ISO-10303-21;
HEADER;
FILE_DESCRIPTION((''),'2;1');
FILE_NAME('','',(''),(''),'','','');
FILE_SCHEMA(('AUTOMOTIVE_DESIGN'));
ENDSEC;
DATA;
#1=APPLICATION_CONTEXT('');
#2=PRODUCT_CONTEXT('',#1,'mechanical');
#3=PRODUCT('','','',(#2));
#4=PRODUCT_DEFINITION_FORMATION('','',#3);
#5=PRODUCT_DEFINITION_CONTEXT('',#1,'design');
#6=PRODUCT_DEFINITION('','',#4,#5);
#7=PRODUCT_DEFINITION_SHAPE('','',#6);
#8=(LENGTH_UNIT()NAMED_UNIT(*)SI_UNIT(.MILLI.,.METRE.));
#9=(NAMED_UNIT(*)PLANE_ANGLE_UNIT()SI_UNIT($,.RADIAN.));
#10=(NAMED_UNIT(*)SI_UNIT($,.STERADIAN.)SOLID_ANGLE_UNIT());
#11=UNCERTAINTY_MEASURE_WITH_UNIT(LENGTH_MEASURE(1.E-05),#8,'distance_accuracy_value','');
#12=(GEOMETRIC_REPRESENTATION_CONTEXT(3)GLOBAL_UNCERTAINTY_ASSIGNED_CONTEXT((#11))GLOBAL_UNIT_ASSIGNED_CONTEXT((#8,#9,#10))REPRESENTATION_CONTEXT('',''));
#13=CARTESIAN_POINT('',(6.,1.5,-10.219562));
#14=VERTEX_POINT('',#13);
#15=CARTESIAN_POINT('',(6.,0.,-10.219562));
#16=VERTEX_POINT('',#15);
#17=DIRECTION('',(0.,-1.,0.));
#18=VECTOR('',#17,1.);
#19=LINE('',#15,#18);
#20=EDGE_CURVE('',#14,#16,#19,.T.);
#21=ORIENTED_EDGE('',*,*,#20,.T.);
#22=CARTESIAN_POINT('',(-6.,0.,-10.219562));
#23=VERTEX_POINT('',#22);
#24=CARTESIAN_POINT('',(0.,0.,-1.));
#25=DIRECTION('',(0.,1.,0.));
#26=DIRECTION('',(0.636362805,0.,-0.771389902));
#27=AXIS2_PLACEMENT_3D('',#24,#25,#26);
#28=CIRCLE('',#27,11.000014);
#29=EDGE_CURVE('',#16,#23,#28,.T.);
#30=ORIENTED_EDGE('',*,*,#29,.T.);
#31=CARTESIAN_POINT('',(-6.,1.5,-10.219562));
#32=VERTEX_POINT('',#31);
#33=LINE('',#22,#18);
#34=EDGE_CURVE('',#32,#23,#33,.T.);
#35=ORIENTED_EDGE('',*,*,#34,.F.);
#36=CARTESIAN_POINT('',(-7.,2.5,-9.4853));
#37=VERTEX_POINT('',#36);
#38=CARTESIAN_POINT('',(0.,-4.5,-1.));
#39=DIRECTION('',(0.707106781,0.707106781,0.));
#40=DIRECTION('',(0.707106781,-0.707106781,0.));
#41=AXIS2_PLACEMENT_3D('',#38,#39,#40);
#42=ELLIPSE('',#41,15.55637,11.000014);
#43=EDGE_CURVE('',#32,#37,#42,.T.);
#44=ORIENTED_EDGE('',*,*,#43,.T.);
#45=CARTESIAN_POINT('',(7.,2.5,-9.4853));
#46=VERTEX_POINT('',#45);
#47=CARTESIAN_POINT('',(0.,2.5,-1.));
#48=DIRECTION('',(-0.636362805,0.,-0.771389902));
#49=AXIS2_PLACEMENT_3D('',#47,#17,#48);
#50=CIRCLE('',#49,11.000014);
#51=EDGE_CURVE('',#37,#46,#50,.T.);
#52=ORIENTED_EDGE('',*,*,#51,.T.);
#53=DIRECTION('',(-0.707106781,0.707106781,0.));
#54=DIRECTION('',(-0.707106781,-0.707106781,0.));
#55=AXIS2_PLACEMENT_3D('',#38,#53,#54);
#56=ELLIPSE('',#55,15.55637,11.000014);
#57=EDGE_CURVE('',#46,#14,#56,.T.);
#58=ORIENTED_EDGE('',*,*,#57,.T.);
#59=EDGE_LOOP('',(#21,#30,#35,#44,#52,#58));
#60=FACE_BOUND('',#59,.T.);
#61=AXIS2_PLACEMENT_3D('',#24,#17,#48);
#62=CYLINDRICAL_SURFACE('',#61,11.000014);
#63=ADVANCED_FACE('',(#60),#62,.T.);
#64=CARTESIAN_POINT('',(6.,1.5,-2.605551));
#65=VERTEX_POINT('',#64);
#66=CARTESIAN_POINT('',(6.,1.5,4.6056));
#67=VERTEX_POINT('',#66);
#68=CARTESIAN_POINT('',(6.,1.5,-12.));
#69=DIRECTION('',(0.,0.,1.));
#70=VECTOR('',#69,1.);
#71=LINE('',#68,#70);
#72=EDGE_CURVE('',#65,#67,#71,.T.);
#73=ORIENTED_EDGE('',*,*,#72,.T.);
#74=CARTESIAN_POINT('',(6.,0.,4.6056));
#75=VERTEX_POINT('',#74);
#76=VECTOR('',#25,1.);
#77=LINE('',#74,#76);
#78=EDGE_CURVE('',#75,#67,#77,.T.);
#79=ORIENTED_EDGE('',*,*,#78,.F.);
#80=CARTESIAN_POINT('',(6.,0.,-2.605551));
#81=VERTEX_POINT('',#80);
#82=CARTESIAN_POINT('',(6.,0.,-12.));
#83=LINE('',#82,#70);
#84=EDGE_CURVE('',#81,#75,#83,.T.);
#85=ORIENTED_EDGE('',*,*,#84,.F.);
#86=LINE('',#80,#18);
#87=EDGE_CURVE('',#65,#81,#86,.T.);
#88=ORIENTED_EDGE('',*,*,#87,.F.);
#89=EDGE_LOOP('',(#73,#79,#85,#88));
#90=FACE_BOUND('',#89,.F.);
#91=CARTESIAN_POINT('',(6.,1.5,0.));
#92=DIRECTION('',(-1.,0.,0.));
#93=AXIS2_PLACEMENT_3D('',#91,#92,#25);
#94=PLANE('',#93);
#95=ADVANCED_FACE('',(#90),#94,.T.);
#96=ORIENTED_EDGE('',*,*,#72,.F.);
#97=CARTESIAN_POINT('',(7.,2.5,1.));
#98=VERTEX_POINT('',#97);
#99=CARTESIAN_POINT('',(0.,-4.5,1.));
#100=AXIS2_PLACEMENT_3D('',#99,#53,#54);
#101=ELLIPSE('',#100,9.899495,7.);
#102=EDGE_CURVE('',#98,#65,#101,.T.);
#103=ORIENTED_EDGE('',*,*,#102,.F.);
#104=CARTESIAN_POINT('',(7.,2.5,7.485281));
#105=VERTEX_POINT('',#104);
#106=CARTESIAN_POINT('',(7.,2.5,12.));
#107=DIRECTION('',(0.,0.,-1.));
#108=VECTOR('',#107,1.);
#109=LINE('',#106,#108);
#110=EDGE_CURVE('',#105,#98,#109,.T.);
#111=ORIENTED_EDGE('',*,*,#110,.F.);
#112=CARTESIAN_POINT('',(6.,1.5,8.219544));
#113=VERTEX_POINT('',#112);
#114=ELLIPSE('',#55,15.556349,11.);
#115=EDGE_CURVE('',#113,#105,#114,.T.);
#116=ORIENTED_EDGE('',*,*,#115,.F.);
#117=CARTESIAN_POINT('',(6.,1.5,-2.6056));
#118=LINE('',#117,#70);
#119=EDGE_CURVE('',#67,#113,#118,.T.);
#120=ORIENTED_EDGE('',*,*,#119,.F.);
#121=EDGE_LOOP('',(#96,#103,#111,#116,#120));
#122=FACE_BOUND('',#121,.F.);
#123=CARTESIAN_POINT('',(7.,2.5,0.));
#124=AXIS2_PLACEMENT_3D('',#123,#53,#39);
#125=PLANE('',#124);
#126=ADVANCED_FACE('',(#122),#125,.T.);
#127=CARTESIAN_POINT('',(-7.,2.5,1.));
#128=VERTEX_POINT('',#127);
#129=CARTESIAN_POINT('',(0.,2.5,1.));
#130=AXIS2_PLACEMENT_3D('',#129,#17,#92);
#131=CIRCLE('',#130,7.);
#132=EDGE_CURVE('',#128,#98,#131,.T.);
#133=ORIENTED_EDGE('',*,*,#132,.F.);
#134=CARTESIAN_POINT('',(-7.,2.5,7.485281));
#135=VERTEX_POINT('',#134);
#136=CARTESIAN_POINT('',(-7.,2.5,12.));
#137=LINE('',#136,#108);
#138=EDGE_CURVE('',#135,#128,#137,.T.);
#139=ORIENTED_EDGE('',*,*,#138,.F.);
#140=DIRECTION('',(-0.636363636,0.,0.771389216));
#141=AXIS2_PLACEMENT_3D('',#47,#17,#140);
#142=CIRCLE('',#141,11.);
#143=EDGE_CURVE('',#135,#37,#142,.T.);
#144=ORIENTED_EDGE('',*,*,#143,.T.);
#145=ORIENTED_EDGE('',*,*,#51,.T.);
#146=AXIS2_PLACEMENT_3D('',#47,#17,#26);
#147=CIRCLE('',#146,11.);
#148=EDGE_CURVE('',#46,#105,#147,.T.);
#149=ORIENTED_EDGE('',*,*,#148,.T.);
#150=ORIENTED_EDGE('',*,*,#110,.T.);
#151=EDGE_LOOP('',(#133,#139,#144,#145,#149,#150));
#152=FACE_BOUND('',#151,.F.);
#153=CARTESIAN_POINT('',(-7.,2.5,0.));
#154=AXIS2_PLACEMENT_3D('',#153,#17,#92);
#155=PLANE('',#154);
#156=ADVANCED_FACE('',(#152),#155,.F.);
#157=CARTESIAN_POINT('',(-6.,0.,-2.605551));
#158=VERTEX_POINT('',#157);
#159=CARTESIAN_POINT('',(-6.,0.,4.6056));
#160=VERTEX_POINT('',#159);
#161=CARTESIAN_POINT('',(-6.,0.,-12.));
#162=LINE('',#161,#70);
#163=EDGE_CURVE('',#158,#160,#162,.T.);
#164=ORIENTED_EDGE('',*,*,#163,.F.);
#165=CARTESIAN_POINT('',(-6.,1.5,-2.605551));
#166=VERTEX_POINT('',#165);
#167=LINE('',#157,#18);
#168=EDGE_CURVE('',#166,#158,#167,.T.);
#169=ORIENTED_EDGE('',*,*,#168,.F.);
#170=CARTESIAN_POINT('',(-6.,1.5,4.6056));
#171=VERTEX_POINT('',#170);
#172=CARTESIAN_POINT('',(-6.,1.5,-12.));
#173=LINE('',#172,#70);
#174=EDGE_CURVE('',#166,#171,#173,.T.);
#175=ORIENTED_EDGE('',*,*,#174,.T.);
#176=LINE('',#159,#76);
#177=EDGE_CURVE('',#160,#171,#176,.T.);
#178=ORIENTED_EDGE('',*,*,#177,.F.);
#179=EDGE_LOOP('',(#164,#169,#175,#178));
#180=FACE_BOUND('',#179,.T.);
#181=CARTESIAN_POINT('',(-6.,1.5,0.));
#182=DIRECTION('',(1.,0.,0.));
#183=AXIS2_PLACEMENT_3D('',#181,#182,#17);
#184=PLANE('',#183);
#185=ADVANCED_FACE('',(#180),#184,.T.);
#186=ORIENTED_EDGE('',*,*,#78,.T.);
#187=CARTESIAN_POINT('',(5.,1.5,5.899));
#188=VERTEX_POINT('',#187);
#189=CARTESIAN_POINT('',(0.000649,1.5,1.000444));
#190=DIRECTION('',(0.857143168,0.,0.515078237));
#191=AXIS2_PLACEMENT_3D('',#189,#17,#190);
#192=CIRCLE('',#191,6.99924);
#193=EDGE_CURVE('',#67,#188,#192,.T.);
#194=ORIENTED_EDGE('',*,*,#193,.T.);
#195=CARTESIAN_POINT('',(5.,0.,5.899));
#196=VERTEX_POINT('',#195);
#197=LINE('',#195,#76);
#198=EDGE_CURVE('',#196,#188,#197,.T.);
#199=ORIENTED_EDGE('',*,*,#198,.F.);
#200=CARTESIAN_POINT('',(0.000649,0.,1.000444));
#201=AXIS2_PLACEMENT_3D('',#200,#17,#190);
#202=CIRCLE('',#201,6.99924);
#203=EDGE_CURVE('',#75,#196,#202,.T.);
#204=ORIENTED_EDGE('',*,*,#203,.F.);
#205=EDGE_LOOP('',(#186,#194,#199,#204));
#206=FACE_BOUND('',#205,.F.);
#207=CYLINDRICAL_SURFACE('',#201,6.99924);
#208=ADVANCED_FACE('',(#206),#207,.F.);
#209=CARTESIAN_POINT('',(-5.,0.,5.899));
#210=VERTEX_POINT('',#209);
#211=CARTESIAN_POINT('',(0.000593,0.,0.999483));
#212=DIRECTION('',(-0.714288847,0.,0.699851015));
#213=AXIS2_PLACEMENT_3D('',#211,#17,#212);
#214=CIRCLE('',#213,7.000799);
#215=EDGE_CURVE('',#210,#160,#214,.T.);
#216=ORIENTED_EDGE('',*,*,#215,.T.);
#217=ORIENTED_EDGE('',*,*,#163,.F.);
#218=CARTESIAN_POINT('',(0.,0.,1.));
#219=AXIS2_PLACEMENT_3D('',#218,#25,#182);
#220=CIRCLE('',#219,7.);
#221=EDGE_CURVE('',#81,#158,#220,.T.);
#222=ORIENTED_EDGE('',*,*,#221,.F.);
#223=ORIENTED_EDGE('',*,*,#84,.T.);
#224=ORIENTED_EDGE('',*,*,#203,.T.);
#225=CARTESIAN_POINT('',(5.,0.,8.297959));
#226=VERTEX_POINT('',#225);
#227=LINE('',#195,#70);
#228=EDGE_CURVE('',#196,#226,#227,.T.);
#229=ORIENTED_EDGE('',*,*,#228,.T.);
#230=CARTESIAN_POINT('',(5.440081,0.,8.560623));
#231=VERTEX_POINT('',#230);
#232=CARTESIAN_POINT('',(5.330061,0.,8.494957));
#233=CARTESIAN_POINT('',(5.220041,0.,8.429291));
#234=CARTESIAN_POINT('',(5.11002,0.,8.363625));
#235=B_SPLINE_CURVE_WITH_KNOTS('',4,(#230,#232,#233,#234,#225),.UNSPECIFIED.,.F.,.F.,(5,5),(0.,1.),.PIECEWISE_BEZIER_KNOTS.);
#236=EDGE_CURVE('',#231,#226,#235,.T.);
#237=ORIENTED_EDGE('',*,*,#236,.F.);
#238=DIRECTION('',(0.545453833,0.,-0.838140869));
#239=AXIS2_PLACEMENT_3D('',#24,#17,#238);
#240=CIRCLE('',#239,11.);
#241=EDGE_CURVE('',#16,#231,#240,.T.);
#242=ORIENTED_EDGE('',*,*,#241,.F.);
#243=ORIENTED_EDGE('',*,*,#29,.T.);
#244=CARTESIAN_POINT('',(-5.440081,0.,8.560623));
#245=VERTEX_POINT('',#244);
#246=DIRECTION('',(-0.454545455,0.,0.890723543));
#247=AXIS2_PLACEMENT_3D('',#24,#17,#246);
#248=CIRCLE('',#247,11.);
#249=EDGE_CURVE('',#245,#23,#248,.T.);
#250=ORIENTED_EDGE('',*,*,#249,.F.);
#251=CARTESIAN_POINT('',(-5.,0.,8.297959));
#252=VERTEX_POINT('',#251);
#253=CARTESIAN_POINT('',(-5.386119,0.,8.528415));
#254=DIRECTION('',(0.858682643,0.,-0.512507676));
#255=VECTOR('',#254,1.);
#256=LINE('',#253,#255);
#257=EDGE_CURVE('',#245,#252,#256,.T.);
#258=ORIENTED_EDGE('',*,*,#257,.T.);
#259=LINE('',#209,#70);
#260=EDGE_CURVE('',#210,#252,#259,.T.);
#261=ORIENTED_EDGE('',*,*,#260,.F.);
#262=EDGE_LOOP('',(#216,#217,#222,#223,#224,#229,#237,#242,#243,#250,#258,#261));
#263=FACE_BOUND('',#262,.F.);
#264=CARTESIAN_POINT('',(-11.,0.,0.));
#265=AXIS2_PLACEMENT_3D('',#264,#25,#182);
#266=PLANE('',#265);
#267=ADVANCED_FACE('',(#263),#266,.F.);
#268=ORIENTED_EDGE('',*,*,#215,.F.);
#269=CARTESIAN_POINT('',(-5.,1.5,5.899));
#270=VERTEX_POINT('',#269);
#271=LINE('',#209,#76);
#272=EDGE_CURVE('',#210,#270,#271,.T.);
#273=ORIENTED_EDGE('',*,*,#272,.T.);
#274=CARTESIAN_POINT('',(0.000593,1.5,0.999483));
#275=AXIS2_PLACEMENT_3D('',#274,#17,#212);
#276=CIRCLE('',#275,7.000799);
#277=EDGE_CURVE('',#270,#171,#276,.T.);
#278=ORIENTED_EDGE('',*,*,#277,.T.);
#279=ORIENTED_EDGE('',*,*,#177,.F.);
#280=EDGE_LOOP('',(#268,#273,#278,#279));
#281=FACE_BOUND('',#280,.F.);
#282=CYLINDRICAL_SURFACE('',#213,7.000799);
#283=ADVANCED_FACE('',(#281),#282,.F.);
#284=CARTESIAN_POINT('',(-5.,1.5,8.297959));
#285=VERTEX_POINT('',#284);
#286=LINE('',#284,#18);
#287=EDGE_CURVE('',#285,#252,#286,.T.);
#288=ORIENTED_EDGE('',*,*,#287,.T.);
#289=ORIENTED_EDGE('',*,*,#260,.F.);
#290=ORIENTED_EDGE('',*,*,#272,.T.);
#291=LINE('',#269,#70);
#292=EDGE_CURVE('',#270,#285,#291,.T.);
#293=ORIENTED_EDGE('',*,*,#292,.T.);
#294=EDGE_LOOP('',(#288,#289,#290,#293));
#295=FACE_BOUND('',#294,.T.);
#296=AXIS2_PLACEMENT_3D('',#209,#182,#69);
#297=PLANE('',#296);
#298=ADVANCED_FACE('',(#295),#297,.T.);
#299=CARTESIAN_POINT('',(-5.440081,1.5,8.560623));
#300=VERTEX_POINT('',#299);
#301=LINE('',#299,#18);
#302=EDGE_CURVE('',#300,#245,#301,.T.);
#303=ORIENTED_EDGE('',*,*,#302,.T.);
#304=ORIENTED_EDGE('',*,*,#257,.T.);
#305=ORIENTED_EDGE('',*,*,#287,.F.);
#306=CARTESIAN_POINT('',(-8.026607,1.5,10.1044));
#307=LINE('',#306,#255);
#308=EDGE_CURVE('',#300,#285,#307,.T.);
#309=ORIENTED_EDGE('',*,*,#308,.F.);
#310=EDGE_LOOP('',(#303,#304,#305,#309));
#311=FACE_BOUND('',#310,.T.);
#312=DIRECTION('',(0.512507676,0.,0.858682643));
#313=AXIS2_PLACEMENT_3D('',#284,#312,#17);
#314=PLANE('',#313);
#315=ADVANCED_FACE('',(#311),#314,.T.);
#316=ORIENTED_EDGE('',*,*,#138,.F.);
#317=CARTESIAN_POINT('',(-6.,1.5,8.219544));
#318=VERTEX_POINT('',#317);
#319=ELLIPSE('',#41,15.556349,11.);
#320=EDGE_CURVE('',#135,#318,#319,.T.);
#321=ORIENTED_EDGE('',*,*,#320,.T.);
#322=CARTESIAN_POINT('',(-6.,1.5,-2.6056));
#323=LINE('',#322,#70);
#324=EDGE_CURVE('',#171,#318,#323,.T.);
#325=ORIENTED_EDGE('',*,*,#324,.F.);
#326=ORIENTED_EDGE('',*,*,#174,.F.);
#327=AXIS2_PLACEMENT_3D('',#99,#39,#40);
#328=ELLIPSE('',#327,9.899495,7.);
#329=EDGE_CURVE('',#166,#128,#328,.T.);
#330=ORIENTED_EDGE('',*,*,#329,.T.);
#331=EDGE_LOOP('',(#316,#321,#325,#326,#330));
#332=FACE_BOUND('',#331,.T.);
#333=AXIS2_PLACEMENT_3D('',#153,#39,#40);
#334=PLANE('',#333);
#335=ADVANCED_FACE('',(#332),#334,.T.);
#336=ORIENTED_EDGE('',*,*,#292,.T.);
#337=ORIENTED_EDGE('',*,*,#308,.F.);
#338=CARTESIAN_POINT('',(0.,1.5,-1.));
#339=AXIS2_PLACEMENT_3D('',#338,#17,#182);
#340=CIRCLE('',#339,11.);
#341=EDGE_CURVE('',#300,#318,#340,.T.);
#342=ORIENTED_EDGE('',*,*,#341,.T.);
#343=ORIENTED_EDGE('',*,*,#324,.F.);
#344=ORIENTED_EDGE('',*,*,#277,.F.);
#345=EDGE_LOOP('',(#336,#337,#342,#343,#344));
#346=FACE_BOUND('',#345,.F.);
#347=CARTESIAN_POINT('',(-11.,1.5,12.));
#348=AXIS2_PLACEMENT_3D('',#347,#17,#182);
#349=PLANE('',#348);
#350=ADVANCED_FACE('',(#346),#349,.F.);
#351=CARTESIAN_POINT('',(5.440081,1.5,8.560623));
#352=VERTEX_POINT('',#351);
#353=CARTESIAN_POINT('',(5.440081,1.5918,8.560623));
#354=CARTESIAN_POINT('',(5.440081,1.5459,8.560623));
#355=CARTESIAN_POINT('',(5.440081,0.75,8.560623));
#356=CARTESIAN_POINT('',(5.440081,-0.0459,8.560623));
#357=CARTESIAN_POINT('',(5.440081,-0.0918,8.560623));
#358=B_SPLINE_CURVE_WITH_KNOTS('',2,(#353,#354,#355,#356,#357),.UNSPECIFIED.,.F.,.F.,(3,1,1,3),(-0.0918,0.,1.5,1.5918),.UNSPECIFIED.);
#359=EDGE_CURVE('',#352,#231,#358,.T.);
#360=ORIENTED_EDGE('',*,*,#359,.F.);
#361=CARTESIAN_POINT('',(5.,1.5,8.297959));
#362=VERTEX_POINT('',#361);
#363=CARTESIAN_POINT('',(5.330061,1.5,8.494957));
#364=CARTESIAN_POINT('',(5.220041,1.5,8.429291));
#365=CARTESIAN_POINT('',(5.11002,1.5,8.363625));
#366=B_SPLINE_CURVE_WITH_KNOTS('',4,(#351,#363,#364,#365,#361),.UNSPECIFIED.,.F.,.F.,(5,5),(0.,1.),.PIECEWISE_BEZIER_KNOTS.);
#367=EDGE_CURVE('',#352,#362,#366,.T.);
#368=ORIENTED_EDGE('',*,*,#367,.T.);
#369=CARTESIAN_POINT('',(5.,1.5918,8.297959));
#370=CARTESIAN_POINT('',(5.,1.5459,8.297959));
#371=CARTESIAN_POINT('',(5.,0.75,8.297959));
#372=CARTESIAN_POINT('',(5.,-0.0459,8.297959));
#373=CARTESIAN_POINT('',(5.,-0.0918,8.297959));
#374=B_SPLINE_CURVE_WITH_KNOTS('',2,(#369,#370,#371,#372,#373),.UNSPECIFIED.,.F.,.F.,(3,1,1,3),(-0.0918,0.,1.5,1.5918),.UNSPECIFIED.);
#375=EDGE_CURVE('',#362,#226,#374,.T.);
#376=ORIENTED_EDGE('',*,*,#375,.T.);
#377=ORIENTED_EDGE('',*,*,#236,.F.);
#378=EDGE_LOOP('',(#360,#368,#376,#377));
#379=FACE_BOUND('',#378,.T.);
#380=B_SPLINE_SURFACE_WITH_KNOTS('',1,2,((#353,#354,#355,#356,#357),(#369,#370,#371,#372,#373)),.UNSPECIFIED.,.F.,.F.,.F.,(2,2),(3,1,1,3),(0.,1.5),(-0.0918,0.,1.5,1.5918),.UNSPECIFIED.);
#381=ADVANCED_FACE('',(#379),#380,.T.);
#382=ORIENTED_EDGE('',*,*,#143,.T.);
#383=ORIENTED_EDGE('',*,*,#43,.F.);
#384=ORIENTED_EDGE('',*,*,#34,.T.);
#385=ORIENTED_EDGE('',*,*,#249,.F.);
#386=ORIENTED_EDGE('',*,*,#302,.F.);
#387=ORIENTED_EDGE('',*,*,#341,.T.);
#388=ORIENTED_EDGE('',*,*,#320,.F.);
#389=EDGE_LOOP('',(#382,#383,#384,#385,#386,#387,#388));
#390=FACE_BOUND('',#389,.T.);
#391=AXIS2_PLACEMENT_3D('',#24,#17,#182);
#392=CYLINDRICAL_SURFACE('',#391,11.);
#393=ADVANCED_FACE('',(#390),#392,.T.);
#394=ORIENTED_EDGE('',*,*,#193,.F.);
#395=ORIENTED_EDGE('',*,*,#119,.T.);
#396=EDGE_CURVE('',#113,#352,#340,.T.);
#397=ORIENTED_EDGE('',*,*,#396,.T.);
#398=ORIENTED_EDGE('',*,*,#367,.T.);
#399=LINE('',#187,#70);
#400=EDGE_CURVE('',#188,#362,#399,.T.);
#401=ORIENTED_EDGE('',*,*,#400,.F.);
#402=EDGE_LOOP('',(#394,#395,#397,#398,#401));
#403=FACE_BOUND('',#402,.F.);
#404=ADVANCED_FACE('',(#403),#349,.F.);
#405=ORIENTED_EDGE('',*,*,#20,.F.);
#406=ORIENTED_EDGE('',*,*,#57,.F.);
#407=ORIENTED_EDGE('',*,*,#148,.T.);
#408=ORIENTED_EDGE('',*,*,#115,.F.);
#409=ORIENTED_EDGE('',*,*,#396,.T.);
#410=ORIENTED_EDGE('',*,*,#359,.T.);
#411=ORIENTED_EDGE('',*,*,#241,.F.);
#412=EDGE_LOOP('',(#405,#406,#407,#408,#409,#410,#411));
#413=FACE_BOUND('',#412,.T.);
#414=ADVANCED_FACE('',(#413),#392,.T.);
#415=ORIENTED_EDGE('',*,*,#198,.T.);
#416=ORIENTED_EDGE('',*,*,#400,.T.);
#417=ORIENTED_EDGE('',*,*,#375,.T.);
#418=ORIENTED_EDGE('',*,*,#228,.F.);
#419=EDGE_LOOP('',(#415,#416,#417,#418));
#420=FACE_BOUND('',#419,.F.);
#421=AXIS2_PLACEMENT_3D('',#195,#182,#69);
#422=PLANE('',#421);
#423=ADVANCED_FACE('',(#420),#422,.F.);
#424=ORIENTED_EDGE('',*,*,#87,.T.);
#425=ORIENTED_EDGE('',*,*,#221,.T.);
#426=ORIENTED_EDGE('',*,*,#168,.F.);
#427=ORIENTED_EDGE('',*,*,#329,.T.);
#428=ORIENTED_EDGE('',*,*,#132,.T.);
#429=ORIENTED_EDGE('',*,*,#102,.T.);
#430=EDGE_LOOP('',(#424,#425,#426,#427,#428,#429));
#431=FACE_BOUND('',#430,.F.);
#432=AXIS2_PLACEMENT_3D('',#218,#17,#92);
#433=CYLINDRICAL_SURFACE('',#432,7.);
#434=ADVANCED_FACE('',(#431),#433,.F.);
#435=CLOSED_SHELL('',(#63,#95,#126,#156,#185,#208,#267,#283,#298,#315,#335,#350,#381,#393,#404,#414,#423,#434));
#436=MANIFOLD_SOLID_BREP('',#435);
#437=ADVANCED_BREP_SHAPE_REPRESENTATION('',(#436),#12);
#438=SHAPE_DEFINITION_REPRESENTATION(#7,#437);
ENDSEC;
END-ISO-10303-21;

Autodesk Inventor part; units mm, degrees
ref_plane "YZ Plane" through (0, 0, 0) normal (1, 0, 0) x (0, 1, 0)
ref_plane "XZ Plane" through (0, 0, 0) normal (0, 1, 0) x (-1, 0, 0)
ref_plane "XY Plane" through (0, 0, 0) normal (0, 0, 1) x (1, 0, 0)
sketch "Sketch1" plane through (0, 0, 0) normal (0, 0, 1) x (1, 0, 0)
  line L0 (0, 0) -> (-7, 0) construction
  line L1 (-7, 0) -> (-7, 2.5)
  line L2 (-7, 2.5) -> (-6, 1.5)
  line L3 (-6, 1.5) -> (-6, 0)
  line L4 (-7, 2.5) -> (-11, 2.5)
  line L5 (-11, 2.5) -> (-11, 0)
  line L6 (-11, 0) -> (-7, 0)
  line L7 (-7, 0) -> (-7, 2.5)
  line L8 (-7, 0) -> (-6, 0)
  dimension "d0" = 7
  dimension "d1" = 45
  dimension "d2" = 1
  dimension "d3" = 2.5
  dimension "d5" = 11
extrude "Extrusion1" add sketch "Sketch1" along normal mid plane 24
mirror "Mirror1" about plane through (0, 0, 0) normal (1, 0, 0) of "Extrusion1"
sketch "Sketch2" plane through (-11, 0, 12) normal (0, -1, 0) x (1, 0, 0)
  line L0 (5, -24) -> (5, 0) projected
  line L1 (0, 0) -> (5, 0) projected
  line L2 (0, -24) -> (0, 0) projected
  line L3 (5, -24) -> (0, -24) projected
  line L4 (17, -24) -> (17, 0) projected
  line L5 (17, -24) -> (22, -24) projected
  line L6 (22, -24) -> (22, 0) projected
  line L7 (22, 0) -> (17, 0) projected
  line L8 (11, -12) -> (11, -11)
  line L9 (5, -24) -> (5, 0) projected
  arc A0 (4, -11) -> (18, -11) centre (11, -11) ccw
  line L10 (11, -12) -> (11, -13)
  arc A1 (4, -21.4853) -> (18, -21.4853) centre (11, -13) ccw
  line L11 (17, -24) -> (17, 0) projected
  line L12 (4, 0) -> (4, -24) projected
  line L13 (18, 0) -> (18, -24) projected
  line L14 (4, -11) -> (4, -21.4853)
  line L15 (18, -11) -> (18, -21.4853)
  dimension "d8" = 1
  dimension "d11" = 7
  dimension "d12" = 11
extrude "Extrusion2" add sketch "Sketch2" against normal up to surface (2.5 mm away) contours A1 L12 A0 L0 | L0 A0 L4 A1 | L4 A0 L13 A1
sketch "Sketch3" plane through (-11, 0, 12) normal (0, -1, 0) x (1, 0, 0)
  line L0 (5, -14.6056) -> (5, 0) projected
  line L1 (0, 0) -> (5, 0) projected
  line L2 (0, -24) -> (0, 0) projected
  line L3 (5, -24) -> (0, -24) projected
  line L4 (5, -24) -> (5, -22.2195) projected
  arc A0 (5, -22.2195) -> (17, -22.2195) centre (11, -13) ccw projected
  line L5 (17, -24) -> (17, -22.2195) projected
  line L6 (17, -24) -> (22, -24) projected
  line L7 (22, -24) -> (22, 0) projected
  line L8 (22, 0) -> (17, 0) projected
  line L9 (17, -14.6056) -> (17, 0) projected
  arc A1 (5, -14.6056) -> (17, -14.6056) centre (11, -11) ccw projected
  line L10 (5, -14.6056) -> (5, 0) projected
  arc A2 (5, -14.6056) -> (17, -14.6056) centre (11, -11) ccw projected
  line L11 (6, -6.101) -> (6, -2.3397)
  line L12 (16, -6.101) -> (16, -2.3397)
  arc A3 (17, -3) -> (16, -2.3397) centre (11, -11) ccw
  arc A4 (6, -2.3397) -> (5, -3) centre (11, -11) ccw
  arc A5 (17, -7.3944) -> (16, -6.101) centre (11, -11) ccw
  arc A6 (6, -6.101) -> (5, -7.3944) centre (11, -11) ccw
  line L13 (17, -3) -> (17, -7.3944)
  line L14 (17, -14.6056) -> (17, 0) projected
  line L15 (5, -3) -> (5, -7.3944)
  point P0 (11, -12)
  dimension "d15" = 1
  dimension "d16" = 1
  dimension "d17" = 10
extrude "Extrusion3" add sketch "Sketch3" against normal blind 1.5 contours L0 A4 L11 A6 | A5 L12 A3 L9
sketch "Sketch4" plane through (-11, 0, 12) normal (0, -1, 0) x (1, 0, 0)
  line L0 (5, -14.6056) -> (5, -7.3944) construction
  arc A0 (6, -6.101) -> (5, -7.3944) centre (11, -11) ccw construction
  line L1 (6, -6.101) -> (6, -2.3397) construction
  arc A1 (6, -2.3397) -> (5, -3) centre (11, -11) ccw construction
  line L2 (5, -3) -> (5, 0) construction
  line L3 (0, 0) -> (5, 0) construction
  line L4 (0, -24) -> (0, 0) construction
  line L5 (5, -24) -> (0, -24) construction
  line L6 (5, -24) -> (5, -22.2195) construction
  arc A2 (5, -22.2195) -> (17, -22.2195) centre (11, -13) ccw construction
  line L7 (17, -24) -> (17, -22.2195) construction
  line L8 (17, -24) -> (22, -24) construction
  line L9 (22, -24) -> (22, 0) construction
  line L10 (22, 0) -> (17, 0) construction
  line L11 (17, -3) -> (17, 0) construction
  arc A3 (17, -3) -> (16, -2.3397) centre (11, -11) ccw construction
  line L12 (16, -2.3397) -> (16, -6.101) construction
  arc A4 (17, -7.3944) -> (16, -6.101) centre (11, -11) ccw construction
  line L13 (17, -14.6056) -> (17, -7.3944) construction
  arc A5 (5, -14.6056) -> (17, -14.6056) centre (11, -11) ccw construction
  circle A6 centre (11, -13) radius 11
  circle A7 centre (11, -13) radius 19.3975
  point P0 (11, -12)
extrude "Extrusion4" cut sketch "Sketch4" against normal through all
chamfer "Chamfer1" distance 0.5 angle 45 2 edges at (-5, 0.75, 8.798) (5, 0.75, 8.798)
equation "\"d16\" = d15"
properties part number "bottom_clip" material "ABS Plastic"
